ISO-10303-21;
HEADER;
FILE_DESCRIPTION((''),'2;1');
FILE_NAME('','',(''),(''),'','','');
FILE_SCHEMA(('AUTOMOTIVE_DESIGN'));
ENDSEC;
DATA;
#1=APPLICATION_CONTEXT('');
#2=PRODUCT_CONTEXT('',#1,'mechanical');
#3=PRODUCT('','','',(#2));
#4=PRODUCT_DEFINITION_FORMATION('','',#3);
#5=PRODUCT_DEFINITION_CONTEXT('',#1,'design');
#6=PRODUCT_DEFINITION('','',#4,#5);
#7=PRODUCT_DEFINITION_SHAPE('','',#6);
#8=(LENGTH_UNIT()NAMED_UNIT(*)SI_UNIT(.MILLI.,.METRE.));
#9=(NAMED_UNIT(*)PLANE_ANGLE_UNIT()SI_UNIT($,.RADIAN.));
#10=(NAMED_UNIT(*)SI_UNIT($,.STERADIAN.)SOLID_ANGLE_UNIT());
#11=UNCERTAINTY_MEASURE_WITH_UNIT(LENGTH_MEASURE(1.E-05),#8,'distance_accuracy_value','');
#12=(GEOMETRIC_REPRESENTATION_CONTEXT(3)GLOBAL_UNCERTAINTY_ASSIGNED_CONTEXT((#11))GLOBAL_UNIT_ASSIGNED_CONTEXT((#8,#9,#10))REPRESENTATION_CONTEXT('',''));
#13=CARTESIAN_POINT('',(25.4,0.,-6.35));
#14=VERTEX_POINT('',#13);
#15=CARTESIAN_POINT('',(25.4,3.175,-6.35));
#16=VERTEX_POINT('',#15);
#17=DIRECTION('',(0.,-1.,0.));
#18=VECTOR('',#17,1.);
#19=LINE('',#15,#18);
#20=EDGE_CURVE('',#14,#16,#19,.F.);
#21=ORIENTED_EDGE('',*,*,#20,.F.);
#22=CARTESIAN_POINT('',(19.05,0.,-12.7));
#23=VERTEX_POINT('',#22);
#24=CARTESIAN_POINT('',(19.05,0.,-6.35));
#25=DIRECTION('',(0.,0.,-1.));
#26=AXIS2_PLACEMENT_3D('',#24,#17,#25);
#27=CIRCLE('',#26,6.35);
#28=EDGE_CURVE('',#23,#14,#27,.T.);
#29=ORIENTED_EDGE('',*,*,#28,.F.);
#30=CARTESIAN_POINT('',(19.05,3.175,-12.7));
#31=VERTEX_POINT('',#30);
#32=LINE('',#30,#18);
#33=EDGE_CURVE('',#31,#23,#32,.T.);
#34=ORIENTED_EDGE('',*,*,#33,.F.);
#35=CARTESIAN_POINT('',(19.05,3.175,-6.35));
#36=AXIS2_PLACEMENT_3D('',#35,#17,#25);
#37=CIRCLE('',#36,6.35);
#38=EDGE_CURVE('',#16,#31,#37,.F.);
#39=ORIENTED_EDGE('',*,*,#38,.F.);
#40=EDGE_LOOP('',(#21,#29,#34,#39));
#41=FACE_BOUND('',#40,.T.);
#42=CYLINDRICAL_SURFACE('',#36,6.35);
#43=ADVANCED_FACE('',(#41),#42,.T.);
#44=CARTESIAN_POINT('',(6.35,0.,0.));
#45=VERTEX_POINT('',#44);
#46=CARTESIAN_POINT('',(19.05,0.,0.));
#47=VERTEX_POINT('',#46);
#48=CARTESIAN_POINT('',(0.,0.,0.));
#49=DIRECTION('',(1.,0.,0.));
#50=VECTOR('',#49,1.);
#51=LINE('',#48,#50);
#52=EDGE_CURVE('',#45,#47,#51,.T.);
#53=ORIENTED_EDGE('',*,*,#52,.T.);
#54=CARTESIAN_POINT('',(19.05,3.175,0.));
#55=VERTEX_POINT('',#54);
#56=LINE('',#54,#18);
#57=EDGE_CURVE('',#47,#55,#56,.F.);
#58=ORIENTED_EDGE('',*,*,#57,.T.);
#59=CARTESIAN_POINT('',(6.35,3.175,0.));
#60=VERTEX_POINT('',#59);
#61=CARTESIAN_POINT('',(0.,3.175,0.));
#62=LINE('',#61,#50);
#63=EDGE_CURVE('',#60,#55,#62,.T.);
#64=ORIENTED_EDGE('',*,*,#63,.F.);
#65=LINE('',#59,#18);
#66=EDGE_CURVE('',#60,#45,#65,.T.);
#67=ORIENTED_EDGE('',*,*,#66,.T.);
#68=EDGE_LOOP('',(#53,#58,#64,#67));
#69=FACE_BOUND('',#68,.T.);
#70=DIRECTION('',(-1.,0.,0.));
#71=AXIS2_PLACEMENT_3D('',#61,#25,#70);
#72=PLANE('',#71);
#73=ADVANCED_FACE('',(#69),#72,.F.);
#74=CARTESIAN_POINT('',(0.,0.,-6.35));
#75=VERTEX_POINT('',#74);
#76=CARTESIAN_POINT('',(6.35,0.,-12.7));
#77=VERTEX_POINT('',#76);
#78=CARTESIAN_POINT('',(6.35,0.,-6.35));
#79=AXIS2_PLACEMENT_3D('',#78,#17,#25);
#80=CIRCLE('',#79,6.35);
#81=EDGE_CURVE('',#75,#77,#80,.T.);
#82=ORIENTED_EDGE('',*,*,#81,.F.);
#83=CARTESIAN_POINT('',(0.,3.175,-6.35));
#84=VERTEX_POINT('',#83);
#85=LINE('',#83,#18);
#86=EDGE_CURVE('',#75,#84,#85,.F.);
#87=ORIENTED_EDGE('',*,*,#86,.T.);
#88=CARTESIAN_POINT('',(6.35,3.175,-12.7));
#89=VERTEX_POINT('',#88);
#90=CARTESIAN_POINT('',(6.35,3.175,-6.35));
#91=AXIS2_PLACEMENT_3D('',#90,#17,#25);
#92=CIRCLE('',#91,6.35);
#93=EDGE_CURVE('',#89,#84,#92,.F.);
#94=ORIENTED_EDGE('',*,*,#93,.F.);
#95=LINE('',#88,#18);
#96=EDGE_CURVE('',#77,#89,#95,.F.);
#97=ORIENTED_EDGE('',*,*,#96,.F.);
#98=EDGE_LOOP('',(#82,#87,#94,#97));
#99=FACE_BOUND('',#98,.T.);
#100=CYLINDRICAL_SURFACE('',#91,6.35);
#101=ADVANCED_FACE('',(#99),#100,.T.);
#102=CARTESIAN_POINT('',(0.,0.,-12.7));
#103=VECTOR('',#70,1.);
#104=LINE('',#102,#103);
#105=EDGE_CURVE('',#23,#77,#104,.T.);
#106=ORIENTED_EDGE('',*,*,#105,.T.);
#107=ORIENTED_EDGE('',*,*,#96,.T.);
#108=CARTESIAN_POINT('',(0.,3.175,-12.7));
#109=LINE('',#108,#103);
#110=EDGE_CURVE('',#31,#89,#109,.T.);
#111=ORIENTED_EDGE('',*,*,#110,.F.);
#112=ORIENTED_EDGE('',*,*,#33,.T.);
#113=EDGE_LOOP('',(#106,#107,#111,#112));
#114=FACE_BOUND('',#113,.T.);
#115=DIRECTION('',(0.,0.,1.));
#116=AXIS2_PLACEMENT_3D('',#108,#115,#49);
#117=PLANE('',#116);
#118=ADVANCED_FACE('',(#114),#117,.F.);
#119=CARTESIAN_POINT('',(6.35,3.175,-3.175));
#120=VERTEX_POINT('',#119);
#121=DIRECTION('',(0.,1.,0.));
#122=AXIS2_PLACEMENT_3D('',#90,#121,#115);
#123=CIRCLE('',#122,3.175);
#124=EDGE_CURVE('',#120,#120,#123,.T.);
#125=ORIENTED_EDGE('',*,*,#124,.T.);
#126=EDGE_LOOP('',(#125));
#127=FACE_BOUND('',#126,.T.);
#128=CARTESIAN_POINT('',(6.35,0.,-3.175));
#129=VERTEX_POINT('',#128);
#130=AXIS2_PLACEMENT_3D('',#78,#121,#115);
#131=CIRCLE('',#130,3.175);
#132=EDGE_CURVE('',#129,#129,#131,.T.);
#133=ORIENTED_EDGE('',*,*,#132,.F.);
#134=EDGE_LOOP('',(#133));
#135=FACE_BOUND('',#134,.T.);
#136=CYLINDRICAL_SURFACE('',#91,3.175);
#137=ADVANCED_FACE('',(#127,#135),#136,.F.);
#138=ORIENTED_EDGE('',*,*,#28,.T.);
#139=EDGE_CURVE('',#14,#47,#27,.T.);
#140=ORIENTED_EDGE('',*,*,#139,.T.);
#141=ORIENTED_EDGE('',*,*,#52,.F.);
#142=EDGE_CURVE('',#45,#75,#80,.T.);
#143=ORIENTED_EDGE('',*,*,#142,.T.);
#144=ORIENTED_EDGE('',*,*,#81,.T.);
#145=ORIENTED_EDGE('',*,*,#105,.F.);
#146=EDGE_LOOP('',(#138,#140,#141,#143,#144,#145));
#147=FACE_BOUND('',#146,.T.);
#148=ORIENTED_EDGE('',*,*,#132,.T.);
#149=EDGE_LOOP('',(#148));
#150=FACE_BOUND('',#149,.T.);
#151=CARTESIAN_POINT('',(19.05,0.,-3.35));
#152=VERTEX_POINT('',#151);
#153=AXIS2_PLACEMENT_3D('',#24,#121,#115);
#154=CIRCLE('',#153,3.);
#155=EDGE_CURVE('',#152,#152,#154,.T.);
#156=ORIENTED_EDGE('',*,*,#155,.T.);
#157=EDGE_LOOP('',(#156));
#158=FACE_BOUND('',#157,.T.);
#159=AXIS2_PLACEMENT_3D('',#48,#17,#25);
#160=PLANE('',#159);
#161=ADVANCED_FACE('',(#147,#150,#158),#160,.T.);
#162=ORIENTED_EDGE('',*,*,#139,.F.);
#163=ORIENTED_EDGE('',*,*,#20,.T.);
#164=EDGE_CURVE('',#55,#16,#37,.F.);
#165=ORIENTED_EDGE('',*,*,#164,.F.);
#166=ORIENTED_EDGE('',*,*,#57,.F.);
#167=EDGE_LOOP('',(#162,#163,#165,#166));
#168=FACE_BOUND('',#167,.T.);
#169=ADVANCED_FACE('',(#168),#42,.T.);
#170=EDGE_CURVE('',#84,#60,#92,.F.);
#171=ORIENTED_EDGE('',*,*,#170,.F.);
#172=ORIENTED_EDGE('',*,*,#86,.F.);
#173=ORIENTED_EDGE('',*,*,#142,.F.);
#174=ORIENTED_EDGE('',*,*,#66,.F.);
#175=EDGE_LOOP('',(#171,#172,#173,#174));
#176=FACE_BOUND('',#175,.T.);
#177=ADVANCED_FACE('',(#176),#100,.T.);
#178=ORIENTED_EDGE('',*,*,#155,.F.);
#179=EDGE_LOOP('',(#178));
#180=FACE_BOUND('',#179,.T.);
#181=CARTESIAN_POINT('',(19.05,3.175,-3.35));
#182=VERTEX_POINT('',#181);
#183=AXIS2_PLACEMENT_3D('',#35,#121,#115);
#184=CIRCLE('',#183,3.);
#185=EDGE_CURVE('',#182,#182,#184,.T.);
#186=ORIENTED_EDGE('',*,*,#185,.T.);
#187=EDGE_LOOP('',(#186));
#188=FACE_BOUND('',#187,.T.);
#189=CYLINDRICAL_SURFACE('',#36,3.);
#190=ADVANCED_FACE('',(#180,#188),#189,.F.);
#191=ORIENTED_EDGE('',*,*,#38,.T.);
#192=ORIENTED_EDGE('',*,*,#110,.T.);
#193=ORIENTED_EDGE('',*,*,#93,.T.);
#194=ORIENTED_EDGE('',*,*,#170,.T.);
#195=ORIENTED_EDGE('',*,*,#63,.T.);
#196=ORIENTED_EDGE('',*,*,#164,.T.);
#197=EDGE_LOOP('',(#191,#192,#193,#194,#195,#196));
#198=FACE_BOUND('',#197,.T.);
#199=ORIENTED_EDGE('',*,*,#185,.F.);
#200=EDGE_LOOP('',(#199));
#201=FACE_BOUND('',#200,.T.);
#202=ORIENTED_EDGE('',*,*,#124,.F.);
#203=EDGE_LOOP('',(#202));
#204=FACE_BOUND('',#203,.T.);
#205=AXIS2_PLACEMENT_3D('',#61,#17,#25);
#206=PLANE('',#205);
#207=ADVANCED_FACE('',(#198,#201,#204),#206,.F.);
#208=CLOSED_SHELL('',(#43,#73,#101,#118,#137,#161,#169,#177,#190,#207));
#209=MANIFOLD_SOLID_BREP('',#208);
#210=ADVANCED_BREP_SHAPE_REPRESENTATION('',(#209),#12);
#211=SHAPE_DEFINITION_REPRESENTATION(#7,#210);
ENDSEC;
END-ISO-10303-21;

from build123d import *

# Parameters (mm, degrees)
SKETCH1_W           = 25.4
SKETCH1_H           = 12.7
SKETCH1_R           = 3
SKETCH1_R_2         = 3.175
BOSS_EXTRUDE1_DEPTH = 3.175
FILLET1_R           = 6.35


with BuildPart() as part:
    # Sketch1 → Boss-Extrude1 (new body)
    with BuildSketch(Plane(origin=(0, 0, 0), x_dir=(1, 0, 0), z_dir=(0, 1, 0))):
        with Locations((12.7, 6.35)):
            Rectangle(SKETCH1_W, SKETCH1_H)
        with Locations(Location((19.05, 6.35, 0), (0, 0, 270))):
            Circle(SKETCH1_R, mode=Mode.SUBTRACT)
        with Locations(Location((6.35, 6.35, 0), (0, 0, 270))):
            Circle(SKETCH1_R_2, mode=Mode.SUBTRACT)
    extrude(amount=BOSS_EXTRUDE1_DEPTH)

    # Fillet1
    fillet1_edges = [part.edges().sort_by_distance(p)[0] for p in [
        (25.4, 1.5875, 0),
        (25.4, 1.5875, -12.7),
        (0, 1.5875, -12.7),
        (0, 1.5875, 0),
    ]]
    fillet(fillet1_edges, radius=FILLET1_R - 0.0001)  # a hair under: the kernel refuses the full size


solid = part.part
